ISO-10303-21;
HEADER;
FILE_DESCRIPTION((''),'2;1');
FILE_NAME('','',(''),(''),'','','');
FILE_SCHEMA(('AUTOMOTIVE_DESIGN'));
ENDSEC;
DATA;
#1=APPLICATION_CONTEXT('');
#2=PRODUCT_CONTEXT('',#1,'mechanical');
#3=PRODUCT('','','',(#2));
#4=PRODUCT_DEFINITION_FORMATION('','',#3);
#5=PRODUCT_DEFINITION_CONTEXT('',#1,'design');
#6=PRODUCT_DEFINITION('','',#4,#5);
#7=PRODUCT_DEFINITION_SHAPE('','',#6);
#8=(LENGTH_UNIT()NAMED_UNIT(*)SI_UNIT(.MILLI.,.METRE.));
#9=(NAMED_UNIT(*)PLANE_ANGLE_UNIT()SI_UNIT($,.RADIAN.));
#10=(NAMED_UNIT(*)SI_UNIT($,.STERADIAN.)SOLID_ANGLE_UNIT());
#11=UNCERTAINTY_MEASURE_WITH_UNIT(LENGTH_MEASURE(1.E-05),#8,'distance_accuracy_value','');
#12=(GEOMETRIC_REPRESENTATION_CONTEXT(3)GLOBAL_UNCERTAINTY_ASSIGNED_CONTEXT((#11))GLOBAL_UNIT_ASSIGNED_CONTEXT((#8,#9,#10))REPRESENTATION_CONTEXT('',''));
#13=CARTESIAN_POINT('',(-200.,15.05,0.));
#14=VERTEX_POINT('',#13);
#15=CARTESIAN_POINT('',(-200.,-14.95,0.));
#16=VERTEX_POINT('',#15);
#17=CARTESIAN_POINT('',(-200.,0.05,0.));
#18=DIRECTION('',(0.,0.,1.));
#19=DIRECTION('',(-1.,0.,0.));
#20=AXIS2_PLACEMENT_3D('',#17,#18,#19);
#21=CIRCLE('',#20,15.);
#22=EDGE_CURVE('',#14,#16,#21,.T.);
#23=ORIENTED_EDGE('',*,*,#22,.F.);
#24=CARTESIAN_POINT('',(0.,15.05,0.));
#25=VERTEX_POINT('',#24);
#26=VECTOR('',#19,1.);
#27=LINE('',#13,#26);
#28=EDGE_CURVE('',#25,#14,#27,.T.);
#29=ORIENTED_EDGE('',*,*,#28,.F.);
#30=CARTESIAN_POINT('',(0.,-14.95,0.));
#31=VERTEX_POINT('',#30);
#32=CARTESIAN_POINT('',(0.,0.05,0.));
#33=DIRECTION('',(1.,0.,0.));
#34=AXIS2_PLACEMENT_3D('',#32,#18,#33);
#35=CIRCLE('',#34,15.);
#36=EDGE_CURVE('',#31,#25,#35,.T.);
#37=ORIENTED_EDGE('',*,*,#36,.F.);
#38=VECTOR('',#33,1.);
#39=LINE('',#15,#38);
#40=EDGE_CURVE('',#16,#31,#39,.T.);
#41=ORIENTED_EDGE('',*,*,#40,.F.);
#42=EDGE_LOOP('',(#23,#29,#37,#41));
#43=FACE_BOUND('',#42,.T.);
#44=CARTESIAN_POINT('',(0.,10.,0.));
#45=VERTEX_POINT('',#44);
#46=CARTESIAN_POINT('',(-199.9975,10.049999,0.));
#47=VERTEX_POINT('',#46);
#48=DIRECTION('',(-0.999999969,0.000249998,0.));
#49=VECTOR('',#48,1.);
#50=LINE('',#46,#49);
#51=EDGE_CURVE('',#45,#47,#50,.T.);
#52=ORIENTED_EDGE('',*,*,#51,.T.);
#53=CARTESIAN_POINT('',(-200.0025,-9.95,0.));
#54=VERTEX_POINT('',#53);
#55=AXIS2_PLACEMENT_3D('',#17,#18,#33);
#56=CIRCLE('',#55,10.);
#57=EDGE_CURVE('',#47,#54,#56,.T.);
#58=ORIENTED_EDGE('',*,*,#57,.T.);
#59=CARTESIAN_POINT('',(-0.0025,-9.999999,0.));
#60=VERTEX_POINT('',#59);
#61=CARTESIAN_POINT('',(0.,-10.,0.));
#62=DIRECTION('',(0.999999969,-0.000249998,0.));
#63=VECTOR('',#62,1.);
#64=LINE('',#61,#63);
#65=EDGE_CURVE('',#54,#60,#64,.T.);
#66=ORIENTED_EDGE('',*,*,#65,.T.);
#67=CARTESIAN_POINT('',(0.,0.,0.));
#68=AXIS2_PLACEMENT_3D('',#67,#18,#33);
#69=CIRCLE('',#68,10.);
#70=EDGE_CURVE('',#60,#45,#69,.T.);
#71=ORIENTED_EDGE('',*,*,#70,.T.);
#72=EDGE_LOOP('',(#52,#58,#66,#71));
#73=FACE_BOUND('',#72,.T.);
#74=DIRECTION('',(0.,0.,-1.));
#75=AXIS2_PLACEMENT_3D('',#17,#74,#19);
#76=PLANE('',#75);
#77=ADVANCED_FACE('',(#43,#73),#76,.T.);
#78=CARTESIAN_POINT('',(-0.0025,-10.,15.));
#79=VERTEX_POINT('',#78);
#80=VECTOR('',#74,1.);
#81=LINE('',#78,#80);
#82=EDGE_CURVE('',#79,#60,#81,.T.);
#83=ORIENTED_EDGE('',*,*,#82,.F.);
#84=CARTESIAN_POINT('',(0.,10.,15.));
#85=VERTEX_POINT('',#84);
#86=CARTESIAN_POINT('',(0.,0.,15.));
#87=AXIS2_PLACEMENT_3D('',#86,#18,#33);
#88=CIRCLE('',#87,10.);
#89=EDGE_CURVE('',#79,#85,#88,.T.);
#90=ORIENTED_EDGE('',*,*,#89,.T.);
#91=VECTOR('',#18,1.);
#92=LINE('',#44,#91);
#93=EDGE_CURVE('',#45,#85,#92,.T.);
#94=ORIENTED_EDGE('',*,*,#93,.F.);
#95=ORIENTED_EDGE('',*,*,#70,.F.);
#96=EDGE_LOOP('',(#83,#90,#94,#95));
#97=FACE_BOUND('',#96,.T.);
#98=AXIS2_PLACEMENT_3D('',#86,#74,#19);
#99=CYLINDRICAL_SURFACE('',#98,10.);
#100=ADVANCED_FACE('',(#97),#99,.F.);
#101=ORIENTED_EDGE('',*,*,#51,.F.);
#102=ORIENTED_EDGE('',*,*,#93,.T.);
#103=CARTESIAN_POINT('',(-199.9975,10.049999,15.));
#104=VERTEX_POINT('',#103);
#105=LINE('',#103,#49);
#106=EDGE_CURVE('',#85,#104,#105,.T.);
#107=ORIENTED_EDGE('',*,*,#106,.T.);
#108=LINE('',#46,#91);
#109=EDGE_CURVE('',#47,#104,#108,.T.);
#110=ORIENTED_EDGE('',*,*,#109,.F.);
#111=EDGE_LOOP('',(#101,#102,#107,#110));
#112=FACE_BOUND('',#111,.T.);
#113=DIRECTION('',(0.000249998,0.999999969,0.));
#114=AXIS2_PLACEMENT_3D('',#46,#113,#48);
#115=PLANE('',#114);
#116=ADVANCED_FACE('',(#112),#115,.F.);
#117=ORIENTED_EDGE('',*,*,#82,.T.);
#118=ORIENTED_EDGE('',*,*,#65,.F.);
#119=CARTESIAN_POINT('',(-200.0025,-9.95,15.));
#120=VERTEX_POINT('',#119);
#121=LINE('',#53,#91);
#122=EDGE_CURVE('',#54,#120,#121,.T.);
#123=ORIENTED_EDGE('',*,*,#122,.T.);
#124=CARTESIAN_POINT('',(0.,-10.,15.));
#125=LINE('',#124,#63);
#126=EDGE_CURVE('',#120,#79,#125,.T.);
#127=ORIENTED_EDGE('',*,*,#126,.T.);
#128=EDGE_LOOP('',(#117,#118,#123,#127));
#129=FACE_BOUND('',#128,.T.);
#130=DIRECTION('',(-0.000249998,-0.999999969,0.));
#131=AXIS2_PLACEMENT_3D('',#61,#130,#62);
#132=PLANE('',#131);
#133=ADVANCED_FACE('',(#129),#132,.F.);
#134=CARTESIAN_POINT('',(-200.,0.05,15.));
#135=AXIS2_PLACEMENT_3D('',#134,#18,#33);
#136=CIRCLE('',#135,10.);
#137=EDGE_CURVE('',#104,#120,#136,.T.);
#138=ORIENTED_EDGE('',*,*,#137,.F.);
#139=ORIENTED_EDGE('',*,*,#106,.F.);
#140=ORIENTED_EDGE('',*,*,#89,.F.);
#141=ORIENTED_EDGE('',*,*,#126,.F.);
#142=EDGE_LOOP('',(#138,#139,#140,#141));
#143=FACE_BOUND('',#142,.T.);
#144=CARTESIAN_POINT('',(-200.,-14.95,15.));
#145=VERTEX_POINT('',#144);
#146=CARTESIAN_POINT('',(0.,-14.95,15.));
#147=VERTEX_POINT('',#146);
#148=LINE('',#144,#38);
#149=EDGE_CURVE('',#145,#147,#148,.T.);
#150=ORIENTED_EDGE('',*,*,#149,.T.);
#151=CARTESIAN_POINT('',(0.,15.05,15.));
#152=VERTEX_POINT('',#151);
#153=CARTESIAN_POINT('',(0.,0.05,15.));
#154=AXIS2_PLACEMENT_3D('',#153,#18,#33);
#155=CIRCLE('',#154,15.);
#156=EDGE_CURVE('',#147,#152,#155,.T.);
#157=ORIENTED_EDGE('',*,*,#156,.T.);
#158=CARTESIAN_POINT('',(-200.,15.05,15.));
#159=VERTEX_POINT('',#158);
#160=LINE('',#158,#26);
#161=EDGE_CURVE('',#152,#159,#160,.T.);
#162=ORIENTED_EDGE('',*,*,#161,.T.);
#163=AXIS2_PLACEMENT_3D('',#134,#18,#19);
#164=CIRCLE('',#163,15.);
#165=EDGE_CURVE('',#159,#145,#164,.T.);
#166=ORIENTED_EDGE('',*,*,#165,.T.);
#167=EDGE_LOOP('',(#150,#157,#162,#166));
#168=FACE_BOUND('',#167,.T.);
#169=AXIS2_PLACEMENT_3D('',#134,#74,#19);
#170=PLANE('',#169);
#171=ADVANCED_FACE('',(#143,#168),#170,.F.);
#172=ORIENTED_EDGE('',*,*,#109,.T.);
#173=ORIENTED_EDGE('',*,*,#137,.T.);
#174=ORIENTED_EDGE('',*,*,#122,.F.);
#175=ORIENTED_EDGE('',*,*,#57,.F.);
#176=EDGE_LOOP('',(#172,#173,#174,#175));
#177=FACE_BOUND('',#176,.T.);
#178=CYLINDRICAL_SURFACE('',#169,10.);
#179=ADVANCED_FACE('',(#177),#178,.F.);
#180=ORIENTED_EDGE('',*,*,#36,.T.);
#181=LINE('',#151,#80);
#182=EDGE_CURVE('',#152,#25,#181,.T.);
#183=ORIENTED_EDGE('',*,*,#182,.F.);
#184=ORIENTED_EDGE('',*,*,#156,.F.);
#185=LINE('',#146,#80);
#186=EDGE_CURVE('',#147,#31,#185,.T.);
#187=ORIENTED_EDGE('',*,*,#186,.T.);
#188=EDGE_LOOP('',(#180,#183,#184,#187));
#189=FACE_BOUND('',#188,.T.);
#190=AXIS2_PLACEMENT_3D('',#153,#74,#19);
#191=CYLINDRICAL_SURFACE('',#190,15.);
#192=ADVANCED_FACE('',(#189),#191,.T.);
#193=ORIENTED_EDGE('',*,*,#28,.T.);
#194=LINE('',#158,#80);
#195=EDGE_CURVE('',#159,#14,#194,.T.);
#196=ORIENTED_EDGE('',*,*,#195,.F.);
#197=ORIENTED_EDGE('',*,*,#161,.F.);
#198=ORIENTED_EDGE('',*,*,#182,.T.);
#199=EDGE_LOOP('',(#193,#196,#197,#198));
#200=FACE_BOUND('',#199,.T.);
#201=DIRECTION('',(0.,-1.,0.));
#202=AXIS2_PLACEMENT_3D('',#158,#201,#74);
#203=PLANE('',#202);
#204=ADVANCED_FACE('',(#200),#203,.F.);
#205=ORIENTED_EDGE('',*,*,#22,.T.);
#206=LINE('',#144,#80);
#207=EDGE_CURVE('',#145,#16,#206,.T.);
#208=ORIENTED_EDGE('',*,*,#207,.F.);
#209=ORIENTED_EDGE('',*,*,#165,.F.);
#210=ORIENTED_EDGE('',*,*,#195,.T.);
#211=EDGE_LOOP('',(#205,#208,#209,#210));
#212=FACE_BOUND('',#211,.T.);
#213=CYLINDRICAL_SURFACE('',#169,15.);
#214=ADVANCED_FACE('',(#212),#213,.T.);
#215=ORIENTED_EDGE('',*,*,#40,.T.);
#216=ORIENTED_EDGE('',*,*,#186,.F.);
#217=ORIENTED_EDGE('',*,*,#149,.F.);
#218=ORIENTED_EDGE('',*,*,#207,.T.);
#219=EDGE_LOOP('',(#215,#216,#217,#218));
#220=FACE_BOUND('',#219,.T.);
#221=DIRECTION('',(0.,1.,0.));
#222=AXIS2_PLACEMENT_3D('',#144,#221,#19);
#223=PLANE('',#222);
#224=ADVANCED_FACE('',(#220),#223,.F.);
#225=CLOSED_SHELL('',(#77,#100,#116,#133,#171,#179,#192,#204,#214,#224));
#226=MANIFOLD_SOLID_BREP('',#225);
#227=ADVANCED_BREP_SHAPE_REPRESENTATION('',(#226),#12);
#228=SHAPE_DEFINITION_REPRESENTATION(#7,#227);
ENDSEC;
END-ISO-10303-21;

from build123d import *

# Parameters (mm, degrees)
SKETCH1_R          = 10
EXTRUDE1_DEPTH     = 15
CUT_EXTRUDE1_START = -15
CUT_EXTRUDE1_DEPTH = 15


# Read off the part's stored shape, not the designer's step: Cut-Extrude1
with BuildPart() as part:
    # Sketch1 → Extrude1 (new body)
    with BuildSketch(Plane.XY):
        with BuildLine():
            Line((-200, 15.05), (0, 15.05))
            ThreePointArc((0, 15.05), (15, 0.05), (0, -14.95))
            Line((0, -14.95), (-200, -14.95))
            ThreePointArc((-200, -14.95), (-215, 0.05), (-200, 15.05))
        make_face()
        with Locations((-200, 0.05)):
            Circle(SKETCH1_R, mode=Mode.SUBTRACT)
        Circle(SKETCH1_R, mode=Mode.SUBTRACT)
    extrude(amount=EXTRUDE1_DEPTH)

    # Cut-Extrude1 outline → Cut-Extrude1 (cut)
    with BuildSketch(Plane.XY.offset(15).offset(CUT_EXTRUDE1_START)):
        with BuildLine():
            ThreePointArc((-199.997500016, 10.049999688), (-190.000000313, 0.0475), (-200.002500016, -9.949999687))
            Line((-200.002500016, -9.949999687), (-0.002499984, -9.999999688))
            ThreePointArc((-0.002499984, -9.999999688), (-9.999999922, 0.001249992), (0, 10))
            Line((0, 10), (-199.997500016, 10.049999688))
        make_face()
    extrude(amount=CUT_EXTRUDE1_DEPTH, mode=Mode.SUBTRACT)


solid = part.part
